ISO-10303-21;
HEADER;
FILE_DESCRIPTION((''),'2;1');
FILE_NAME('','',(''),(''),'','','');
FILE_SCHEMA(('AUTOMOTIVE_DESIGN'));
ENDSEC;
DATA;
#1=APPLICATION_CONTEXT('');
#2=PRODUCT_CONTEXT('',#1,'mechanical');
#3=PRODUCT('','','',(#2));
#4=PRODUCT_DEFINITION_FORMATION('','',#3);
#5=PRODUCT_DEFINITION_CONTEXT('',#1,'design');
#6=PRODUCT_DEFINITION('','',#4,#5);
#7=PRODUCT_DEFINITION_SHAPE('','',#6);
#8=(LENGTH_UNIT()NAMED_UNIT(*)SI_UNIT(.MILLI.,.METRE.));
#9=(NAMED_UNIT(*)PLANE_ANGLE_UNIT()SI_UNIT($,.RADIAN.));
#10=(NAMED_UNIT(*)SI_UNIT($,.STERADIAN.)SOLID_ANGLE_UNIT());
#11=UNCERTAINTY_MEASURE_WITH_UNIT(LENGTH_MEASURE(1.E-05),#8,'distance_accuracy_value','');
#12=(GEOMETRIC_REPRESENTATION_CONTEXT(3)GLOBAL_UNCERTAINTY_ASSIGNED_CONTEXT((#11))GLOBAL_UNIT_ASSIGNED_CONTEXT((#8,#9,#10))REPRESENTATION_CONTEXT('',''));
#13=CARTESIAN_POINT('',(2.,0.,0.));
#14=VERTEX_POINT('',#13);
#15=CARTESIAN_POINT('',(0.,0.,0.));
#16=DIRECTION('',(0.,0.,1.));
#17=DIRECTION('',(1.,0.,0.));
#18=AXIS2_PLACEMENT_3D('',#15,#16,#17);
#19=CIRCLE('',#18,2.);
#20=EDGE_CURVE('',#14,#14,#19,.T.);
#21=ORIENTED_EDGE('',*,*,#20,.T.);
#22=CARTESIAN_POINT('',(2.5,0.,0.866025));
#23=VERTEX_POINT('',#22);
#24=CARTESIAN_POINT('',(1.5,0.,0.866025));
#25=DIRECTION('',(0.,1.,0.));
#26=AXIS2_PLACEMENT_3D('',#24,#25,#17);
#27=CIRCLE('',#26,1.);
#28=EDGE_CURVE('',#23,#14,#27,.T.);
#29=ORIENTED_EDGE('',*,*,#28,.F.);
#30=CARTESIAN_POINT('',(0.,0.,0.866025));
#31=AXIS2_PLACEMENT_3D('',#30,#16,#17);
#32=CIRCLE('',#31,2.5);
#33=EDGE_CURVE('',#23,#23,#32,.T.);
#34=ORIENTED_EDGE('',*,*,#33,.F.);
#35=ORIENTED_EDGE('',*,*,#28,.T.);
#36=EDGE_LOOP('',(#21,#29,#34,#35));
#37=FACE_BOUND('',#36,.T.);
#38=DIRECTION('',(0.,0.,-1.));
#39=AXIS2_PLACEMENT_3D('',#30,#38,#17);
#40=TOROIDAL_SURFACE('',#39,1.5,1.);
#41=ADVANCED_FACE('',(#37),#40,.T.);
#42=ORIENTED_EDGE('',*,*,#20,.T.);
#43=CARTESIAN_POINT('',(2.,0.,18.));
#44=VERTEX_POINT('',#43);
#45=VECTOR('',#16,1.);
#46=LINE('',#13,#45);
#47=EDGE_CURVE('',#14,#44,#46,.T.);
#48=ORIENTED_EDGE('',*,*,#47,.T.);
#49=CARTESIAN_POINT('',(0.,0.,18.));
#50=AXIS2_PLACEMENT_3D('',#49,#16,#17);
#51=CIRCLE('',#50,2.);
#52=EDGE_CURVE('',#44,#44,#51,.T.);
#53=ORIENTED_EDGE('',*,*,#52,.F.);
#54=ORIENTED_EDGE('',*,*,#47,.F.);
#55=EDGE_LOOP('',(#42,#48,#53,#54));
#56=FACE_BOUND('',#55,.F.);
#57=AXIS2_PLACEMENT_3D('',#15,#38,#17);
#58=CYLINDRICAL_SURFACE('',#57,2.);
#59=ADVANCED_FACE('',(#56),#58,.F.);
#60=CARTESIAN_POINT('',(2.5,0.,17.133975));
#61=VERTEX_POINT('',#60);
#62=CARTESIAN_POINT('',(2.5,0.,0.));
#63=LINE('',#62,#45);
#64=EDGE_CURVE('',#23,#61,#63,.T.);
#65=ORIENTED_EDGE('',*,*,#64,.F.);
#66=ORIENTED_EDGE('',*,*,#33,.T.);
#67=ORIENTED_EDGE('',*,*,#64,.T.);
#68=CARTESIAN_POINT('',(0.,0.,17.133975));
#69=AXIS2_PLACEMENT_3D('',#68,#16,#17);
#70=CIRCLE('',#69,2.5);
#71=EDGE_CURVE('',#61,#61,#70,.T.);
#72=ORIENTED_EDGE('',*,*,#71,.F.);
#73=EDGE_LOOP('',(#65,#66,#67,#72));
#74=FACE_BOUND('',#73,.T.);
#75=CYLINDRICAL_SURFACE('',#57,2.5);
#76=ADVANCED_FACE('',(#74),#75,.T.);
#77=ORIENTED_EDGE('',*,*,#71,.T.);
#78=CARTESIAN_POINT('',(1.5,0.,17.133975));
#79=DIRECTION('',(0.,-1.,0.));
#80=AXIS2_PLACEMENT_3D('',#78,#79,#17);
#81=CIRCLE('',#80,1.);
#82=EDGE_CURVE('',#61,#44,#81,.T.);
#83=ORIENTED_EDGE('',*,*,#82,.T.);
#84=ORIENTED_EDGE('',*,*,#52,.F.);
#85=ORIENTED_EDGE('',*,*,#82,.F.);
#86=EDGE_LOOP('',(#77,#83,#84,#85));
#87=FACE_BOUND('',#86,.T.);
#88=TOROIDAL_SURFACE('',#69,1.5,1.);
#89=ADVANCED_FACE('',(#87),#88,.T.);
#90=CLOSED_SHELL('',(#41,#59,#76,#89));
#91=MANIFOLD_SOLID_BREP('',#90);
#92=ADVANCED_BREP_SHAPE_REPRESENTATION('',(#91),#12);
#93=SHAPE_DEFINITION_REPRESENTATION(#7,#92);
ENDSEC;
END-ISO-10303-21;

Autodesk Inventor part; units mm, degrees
ref_plane "YZ Plane" through (0, 0, 0) normal (1, 0, 0) x (0, 1, 0)
ref_plane "XZ Plane" through (0, 0, 0) normal (0, 1, 0) x (-1, 0, 0)
ref_plane "XY Plane" through (0, 0, 0) normal (0, 0, 1) x (1, 0, 0)
sketch "Skizze1" plane through (0, 0, 0) normal (0, 0, 1) x (1, 0, 0)
  circle A0 centre (0, 0) radius 2.5
  circle A1 centre (0, 0) radius 2
  dimension "d0" = 5
  dimension "d1" = 4
extrude "Extrusion1" add sketch "Skizze1" along normal blind 18
thread "Gewinde1" size "M4x0.7" class "6H" standard "ANSI Metric M Profile" full length
fillet "Rundung1" radius 1 2 edges at (-2.5, 0, 18) (-2.5, 0, 0)
properties part number "P_Gewindebuchse_M4_20" material "Aluminium 6061"
